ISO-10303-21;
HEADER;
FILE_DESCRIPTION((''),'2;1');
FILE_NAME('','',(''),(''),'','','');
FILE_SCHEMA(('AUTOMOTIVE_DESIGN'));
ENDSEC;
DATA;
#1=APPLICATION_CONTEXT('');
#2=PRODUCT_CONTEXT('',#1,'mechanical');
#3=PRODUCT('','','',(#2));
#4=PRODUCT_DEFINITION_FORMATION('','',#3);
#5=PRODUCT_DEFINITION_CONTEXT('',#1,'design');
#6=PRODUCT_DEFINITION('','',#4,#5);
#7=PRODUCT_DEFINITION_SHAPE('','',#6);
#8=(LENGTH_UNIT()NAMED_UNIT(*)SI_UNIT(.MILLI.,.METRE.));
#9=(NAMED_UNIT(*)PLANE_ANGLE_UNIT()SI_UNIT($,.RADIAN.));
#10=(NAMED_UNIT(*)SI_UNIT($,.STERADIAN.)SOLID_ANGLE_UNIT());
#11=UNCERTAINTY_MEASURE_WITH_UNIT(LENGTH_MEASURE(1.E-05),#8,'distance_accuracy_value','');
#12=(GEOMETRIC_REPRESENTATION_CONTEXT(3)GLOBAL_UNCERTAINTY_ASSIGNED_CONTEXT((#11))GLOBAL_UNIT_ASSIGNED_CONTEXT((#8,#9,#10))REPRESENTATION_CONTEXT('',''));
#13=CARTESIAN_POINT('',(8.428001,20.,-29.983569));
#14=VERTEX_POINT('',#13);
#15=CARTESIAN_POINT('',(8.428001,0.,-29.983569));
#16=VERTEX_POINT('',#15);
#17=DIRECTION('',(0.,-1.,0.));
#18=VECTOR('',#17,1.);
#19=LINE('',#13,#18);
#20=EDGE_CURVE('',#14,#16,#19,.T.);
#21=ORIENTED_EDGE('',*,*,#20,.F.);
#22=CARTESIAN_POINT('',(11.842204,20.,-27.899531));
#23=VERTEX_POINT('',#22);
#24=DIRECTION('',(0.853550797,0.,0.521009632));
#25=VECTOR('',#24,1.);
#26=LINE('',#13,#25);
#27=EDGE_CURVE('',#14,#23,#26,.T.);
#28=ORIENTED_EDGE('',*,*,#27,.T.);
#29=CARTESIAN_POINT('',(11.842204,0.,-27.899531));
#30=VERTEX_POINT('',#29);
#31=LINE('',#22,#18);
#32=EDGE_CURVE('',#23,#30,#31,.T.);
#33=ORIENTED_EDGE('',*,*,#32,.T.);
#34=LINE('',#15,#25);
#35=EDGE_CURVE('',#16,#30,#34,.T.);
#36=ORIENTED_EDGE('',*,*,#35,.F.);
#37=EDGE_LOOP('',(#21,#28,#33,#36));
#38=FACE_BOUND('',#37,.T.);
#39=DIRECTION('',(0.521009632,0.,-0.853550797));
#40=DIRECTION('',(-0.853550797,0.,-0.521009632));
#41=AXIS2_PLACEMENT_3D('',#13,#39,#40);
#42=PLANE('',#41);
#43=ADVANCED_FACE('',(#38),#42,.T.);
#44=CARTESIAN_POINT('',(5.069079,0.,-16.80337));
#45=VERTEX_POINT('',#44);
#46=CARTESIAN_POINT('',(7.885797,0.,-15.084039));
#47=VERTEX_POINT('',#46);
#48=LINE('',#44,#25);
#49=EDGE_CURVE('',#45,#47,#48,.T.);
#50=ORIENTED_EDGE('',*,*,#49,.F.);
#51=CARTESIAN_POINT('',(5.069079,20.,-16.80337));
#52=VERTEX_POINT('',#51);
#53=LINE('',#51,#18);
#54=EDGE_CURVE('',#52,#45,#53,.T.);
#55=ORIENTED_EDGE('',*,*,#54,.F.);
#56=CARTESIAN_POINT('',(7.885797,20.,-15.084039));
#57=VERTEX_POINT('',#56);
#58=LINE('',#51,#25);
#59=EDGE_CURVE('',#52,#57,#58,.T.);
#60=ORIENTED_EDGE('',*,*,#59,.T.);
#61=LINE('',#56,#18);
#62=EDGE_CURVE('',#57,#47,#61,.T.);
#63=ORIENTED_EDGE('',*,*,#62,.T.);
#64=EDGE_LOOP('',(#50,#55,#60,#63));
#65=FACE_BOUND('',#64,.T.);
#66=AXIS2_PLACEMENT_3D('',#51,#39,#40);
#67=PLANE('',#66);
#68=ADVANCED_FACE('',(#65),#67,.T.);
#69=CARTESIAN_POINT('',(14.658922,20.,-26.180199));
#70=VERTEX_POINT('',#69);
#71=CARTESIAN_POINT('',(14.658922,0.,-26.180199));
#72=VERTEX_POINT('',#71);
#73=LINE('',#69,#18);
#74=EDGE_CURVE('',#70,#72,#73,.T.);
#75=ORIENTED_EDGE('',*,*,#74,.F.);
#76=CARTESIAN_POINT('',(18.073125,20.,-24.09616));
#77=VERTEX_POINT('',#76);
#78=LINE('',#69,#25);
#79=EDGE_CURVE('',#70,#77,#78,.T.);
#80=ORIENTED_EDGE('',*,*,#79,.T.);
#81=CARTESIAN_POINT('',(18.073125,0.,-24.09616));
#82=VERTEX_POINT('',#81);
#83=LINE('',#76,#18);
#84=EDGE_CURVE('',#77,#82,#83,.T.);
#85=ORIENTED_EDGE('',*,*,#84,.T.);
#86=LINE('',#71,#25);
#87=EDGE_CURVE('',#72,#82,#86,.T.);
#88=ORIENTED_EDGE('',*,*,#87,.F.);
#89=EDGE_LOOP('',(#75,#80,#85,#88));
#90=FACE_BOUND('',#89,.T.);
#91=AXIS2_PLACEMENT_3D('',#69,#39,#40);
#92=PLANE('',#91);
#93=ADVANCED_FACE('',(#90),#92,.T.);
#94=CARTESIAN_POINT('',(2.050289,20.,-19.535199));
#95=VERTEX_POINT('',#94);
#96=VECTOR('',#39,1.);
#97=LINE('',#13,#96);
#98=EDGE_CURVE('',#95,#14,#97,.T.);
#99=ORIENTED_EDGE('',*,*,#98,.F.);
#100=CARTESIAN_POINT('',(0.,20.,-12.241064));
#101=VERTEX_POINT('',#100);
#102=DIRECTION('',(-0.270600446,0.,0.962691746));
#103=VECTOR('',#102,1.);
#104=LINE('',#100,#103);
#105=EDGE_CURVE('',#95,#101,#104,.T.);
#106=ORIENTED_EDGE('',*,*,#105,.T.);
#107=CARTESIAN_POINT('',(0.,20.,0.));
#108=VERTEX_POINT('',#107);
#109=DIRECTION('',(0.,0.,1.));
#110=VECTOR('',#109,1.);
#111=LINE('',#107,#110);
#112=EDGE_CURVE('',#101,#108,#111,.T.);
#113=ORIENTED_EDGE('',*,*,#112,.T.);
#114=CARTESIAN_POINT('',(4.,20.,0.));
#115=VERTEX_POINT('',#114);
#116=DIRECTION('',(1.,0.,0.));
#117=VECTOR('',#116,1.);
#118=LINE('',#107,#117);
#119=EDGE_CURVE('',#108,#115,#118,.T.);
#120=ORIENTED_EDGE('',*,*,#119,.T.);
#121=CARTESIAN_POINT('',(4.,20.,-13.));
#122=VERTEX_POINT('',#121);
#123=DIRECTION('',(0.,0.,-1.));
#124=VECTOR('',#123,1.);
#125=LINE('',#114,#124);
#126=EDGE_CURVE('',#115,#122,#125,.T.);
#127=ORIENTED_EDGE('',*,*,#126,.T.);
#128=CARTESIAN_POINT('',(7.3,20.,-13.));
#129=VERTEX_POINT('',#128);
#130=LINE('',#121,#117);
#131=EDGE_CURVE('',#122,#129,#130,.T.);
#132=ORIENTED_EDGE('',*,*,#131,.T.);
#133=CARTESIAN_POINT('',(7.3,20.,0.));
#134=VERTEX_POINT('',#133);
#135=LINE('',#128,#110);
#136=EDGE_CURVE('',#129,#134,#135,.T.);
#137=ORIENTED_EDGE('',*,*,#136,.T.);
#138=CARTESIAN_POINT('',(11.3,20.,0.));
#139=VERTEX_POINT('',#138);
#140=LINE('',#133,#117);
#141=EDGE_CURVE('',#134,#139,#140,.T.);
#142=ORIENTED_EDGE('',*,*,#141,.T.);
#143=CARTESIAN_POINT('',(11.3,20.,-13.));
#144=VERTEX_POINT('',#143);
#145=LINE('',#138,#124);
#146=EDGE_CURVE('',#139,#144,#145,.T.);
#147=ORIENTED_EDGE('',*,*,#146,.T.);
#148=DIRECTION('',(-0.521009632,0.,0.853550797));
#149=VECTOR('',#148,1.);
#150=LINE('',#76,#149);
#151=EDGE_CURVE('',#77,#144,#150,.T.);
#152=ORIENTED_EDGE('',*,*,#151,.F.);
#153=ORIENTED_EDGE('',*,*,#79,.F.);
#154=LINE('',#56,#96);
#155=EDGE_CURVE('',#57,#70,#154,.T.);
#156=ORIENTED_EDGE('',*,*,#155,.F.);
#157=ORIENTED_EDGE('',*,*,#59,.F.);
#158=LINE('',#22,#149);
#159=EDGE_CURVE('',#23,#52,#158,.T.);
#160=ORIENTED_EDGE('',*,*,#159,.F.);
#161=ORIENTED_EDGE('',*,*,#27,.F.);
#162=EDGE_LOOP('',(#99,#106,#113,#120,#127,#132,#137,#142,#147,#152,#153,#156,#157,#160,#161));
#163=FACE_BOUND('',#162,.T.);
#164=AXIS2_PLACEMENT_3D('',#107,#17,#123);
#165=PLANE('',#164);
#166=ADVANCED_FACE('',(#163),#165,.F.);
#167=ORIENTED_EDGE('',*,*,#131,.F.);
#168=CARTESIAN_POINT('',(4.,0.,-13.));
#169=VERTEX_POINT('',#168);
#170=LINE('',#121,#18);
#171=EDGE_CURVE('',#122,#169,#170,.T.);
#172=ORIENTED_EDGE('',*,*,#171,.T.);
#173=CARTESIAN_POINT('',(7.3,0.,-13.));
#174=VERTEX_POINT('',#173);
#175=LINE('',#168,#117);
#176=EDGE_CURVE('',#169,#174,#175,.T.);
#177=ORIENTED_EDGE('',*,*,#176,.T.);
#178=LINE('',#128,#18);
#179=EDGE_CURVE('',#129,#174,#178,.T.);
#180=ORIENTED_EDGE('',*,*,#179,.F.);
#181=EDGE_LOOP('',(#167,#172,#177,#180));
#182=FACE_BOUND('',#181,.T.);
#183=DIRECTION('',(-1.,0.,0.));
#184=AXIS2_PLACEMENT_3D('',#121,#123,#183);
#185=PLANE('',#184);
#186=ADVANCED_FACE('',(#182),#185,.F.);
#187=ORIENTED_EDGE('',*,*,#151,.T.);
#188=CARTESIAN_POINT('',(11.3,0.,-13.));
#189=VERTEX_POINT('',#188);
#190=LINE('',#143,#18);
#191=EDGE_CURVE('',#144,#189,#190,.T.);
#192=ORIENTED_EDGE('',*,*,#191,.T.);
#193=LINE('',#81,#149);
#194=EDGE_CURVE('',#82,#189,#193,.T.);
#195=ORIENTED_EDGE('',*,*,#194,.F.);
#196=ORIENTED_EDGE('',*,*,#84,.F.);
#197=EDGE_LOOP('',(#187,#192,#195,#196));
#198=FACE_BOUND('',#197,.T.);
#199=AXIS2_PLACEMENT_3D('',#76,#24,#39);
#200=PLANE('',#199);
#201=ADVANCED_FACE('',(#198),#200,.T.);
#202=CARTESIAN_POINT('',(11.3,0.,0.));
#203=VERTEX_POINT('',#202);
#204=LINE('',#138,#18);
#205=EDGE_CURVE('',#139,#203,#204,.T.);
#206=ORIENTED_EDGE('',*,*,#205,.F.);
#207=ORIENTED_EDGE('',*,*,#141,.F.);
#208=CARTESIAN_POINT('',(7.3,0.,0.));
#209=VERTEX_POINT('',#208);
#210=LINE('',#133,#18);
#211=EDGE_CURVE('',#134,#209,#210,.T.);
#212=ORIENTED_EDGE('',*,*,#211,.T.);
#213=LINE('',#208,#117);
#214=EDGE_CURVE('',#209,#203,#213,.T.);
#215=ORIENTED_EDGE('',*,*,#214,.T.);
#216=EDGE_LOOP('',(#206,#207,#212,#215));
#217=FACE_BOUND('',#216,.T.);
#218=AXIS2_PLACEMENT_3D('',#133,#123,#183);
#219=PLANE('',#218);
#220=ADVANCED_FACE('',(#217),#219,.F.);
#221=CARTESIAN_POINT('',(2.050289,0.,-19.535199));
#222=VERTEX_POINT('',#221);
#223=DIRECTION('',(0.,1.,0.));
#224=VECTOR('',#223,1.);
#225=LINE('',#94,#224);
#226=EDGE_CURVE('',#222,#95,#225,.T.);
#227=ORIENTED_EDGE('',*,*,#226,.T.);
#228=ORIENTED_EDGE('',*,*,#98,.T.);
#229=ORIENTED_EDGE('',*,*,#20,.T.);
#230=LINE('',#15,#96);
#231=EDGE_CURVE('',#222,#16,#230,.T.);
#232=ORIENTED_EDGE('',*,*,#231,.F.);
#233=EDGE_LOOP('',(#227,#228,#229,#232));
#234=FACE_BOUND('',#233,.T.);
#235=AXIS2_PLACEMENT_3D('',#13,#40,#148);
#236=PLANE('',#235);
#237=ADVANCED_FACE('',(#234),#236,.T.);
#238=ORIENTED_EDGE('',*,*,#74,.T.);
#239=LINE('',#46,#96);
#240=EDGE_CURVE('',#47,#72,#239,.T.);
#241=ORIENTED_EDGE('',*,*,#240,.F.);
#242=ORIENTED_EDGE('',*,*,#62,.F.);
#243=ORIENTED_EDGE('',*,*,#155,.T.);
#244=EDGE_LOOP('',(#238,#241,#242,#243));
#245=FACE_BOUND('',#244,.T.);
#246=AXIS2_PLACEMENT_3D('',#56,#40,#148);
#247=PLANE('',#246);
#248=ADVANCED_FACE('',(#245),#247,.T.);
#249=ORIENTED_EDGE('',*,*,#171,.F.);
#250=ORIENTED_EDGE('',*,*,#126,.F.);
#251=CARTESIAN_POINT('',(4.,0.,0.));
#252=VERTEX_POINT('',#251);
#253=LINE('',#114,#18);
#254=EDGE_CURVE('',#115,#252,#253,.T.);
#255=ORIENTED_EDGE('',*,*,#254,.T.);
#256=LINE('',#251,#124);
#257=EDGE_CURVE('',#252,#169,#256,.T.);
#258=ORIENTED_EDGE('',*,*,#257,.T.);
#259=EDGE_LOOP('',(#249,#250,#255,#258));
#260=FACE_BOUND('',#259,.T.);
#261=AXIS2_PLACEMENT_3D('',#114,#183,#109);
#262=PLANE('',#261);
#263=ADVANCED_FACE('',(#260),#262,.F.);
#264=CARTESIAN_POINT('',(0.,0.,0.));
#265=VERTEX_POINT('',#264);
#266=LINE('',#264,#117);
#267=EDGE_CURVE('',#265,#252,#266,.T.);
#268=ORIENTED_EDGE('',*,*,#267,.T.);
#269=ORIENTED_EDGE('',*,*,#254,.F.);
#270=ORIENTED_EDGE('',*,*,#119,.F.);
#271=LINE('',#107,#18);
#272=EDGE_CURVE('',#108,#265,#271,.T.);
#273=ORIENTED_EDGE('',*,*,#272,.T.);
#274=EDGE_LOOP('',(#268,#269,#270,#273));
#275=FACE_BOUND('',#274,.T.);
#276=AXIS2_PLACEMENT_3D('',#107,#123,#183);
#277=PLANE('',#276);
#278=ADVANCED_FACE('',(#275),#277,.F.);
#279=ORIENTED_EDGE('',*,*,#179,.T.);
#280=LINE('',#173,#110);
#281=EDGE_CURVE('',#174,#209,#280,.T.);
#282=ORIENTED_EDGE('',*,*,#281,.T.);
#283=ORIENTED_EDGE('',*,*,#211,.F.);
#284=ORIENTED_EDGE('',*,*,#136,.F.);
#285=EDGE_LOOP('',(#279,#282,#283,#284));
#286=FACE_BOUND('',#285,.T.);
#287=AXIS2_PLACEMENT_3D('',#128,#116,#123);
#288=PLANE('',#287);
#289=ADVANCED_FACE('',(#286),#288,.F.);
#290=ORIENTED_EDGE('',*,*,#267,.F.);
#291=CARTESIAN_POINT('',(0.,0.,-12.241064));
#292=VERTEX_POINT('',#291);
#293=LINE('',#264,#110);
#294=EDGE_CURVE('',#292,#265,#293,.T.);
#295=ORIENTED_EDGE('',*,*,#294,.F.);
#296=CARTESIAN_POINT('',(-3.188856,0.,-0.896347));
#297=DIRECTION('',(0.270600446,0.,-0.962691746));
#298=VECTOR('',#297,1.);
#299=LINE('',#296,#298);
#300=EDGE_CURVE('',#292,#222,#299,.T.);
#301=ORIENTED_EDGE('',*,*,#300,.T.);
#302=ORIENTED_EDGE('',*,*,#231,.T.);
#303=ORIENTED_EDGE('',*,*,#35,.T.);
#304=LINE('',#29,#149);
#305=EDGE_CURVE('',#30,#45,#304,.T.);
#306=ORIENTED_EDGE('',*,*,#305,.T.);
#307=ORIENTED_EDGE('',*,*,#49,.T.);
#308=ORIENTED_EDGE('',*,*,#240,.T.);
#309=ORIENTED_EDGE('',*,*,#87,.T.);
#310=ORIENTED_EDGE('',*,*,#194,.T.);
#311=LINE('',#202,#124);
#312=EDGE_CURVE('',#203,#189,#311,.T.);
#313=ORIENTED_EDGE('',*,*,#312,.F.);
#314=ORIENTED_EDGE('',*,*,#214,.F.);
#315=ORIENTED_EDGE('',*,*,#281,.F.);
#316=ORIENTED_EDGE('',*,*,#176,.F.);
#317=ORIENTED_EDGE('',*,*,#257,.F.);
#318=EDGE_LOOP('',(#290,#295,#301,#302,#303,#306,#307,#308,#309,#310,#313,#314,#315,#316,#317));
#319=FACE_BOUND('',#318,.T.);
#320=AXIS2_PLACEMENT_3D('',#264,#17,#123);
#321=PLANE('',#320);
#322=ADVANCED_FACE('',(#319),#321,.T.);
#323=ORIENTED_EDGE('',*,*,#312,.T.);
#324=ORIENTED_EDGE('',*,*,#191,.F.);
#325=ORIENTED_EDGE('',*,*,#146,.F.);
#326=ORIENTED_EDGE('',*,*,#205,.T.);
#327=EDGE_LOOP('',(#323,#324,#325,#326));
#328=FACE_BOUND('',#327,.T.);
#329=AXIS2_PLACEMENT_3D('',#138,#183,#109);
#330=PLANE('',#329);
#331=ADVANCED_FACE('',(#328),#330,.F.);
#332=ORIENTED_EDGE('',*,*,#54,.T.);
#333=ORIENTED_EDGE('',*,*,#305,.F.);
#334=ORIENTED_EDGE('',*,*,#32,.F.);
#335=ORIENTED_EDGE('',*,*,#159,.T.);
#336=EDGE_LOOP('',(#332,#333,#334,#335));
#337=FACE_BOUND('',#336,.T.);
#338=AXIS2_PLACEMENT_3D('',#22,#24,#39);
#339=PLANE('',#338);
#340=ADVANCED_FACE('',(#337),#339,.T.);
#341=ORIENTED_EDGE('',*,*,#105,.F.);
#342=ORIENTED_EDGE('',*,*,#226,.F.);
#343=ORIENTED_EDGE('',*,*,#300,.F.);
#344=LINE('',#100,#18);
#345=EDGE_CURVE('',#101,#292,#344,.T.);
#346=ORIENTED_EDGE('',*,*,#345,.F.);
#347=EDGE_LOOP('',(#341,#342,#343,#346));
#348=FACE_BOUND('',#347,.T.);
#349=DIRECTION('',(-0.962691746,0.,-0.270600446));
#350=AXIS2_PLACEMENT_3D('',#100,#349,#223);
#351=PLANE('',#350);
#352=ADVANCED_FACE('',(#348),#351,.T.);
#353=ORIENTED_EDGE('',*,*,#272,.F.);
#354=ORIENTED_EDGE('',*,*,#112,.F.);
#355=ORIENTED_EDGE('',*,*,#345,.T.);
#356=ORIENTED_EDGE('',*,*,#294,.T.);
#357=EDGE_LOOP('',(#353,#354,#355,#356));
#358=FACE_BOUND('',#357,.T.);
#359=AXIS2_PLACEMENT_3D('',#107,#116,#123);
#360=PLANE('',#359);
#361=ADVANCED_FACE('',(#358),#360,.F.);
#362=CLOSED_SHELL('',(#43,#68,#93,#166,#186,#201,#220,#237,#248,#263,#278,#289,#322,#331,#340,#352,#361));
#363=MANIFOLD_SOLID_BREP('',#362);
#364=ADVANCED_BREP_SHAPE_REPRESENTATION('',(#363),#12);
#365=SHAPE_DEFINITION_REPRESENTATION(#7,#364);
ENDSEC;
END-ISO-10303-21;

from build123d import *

# Parameters (mm, degrees)
BOSS_EXTRUDE1_DEPTH = 20
CHAMFER1_START      = -5
CHAMFER1_OUTLINE_W  = 22
CHAMFER1_OUTLINE_H  = 11
CHAMFER1_DEPTH      = 1.687562561


with BuildPart() as part:
    # Sketch1 → Boss-Extrude1 (new body)
    with BuildSketch(Plane(origin=(0, 0, 0), x_dir=(1, 0, 0), z_dir=(0, 1, 0))):
        Polygon((0, 0), (4, 0), (4, 13), (7.3, 13), (7.3, 0), (11.3, 0), (11.3, 13), (0, 16.176286751), align=None)
    boss_extrude1 = extrude(amount=BOSS_EXTRUDE1_DEPTH)

    # Mirror1: Boss-Extrude1 across plane
    add(boss_extrude1.mirror(Plane(origin=(11.3, 20, -13), x_dir=(0.9626917464264807, 0, 0.2706004459758567), z_dir=(-0.2706004459758567, 0, 0.9626917464264807))))

    # Chamfer1: read off the stored shape, not the designer's step
    # Chamfer1 outline → Chamfer1 (cut)
    with BuildSketch(Plane(origin=(0, 0, 0), x_dir=(0, 1, 0), z_dir=(0.9626917464264807, 0, 0.2706004459758569)).offset(CHAMFER1_START)):
        with Locations((10, -15.5)):
            Rectangle(CHAMFER1_OUTLINE_W, CHAMFER1_OUTLINE_H)
    extrude(amount=CHAMFER1_DEPTH, mode=Mode.SUBTRACT)


solid = part.part
